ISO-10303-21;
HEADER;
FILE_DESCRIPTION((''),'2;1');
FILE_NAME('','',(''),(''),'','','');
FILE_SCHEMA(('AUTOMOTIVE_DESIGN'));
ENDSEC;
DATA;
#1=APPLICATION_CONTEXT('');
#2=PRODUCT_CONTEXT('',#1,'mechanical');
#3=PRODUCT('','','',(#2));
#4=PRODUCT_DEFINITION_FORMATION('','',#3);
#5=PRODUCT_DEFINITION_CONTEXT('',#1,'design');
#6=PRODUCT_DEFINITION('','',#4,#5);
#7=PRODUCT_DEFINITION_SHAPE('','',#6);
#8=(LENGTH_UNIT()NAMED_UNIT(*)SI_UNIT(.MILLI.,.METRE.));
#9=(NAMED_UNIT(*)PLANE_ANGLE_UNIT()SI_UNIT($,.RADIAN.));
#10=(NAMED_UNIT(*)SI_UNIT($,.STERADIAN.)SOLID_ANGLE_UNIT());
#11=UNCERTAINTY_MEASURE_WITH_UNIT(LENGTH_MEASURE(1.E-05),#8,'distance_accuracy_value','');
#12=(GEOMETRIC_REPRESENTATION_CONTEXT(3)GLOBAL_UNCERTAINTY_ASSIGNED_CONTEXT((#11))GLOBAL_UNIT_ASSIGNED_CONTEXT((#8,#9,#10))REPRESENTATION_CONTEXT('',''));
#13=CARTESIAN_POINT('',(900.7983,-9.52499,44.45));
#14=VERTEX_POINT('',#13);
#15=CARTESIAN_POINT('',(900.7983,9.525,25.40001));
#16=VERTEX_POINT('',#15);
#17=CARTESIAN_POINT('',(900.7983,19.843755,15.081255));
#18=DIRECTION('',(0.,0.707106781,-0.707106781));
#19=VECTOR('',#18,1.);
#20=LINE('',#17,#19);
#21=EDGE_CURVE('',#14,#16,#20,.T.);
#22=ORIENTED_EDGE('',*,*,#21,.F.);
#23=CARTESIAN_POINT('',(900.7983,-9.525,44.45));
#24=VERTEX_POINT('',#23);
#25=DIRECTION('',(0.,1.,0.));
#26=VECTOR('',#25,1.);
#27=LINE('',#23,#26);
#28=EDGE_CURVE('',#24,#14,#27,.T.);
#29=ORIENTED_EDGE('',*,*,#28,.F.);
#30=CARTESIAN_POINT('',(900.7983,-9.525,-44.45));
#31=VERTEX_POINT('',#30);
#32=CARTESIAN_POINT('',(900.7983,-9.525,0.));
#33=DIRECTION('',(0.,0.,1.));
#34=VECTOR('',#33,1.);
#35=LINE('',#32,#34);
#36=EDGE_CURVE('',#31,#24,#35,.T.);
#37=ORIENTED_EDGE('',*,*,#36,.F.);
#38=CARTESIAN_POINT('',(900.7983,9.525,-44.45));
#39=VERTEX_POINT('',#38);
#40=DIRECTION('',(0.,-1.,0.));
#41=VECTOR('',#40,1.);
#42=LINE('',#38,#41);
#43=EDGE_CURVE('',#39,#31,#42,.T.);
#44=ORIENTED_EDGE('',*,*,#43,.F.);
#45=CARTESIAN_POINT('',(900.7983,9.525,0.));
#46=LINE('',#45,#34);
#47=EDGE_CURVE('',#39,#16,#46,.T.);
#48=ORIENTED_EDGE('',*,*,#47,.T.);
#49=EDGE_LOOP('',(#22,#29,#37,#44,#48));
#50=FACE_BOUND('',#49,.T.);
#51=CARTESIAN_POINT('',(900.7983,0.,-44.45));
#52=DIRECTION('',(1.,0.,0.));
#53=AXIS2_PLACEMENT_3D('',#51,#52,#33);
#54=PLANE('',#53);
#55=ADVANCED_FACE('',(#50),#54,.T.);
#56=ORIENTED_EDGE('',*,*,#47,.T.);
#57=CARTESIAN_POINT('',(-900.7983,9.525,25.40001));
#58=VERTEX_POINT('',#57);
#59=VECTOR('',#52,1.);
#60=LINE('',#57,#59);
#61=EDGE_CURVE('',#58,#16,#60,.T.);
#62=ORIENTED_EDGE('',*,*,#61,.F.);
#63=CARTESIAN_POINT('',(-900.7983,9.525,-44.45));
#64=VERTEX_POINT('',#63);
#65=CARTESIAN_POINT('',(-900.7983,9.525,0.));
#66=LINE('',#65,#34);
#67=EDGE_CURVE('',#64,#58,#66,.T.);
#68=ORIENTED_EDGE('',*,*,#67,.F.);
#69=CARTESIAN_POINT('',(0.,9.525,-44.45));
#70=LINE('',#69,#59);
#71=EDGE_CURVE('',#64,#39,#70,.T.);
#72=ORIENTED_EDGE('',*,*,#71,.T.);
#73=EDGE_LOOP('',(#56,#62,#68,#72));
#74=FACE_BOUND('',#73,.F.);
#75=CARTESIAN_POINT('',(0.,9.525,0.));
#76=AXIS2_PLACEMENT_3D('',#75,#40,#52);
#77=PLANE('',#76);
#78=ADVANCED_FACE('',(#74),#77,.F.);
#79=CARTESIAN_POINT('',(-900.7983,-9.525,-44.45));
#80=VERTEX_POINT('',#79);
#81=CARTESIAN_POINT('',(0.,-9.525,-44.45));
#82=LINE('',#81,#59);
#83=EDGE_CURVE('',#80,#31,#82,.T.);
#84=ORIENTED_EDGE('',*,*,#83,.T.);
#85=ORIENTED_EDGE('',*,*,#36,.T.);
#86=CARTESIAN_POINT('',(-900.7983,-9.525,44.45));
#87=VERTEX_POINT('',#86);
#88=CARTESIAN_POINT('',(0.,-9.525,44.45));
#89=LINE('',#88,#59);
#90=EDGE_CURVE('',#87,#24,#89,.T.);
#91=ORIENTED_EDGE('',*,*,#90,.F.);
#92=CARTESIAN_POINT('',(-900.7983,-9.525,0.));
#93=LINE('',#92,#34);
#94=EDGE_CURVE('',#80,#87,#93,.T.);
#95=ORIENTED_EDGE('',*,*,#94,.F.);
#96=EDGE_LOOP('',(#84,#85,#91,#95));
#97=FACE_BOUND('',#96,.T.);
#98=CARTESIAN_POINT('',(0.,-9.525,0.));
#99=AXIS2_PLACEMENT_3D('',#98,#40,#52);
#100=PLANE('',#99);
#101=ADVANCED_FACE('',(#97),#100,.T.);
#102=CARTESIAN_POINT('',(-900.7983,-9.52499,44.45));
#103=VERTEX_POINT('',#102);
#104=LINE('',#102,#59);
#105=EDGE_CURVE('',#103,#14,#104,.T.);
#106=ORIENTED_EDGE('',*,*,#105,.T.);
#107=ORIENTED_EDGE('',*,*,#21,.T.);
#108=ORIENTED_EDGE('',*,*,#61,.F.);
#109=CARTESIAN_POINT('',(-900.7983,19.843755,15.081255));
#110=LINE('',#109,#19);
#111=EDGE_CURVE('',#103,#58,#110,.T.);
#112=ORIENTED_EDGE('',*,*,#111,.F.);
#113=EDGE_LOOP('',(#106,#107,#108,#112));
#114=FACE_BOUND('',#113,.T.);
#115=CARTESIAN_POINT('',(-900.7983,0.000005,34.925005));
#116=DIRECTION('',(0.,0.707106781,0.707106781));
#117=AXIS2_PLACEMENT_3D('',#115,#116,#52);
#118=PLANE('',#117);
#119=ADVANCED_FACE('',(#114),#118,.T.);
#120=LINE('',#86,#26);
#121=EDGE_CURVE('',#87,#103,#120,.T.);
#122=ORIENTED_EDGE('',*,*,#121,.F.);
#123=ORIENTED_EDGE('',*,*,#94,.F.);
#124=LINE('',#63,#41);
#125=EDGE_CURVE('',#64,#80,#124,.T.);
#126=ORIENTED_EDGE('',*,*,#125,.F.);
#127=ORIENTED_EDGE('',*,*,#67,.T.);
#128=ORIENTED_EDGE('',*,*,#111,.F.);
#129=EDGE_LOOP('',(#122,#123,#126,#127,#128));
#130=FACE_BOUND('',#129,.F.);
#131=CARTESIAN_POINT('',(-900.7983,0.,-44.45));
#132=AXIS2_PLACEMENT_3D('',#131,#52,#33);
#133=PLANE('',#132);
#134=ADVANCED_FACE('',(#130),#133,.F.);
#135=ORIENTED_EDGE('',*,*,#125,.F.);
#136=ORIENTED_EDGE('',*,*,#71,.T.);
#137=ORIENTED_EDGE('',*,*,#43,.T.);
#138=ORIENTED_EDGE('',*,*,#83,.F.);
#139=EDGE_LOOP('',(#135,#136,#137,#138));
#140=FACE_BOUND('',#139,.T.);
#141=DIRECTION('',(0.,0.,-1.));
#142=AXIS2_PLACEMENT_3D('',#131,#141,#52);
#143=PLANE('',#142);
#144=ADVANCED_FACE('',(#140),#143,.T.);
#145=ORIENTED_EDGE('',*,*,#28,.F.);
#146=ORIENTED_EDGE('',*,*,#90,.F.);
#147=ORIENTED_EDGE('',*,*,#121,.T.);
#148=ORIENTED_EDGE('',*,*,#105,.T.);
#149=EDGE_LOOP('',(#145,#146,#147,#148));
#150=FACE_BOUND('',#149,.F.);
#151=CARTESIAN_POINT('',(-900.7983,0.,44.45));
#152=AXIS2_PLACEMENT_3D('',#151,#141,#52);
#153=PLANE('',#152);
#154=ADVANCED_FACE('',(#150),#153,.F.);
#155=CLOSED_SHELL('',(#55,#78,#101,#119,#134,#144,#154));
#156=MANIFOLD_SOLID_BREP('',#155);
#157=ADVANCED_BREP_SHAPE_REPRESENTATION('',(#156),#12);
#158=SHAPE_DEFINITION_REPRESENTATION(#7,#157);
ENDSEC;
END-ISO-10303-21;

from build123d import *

# Parameters (mm, degrees)
F0_W     = 1801.5966
F0_H     = 88.9
F1_DEPTH = 9.525
F2_SIZE  = 19.04999


# Not quite as in the source:
# - a fillet or chamfer is up to 0.001 mm smaller than in the source, because OpenCascade refuses the exact size


with BuildPart() as f1:
    # F0 (on Front) → F1 (new body, symmetric)
    with BuildSketch(Plane.XZ):
        Rectangle(F0_W, F0_H)
    extrude(amount=F1_DEPTH, both=True)

    # F2 (size 19.05 in the source; OpenCascade refuses exactly that, so slightly less here)
    f2_edges = [f1.edges().sort_by_distance(p)[0] for p in [
        (0, 9.525, 44.45),
    ]]
    chamfer(f2_edges, length=F2_SIZE)


solid = f1.part
